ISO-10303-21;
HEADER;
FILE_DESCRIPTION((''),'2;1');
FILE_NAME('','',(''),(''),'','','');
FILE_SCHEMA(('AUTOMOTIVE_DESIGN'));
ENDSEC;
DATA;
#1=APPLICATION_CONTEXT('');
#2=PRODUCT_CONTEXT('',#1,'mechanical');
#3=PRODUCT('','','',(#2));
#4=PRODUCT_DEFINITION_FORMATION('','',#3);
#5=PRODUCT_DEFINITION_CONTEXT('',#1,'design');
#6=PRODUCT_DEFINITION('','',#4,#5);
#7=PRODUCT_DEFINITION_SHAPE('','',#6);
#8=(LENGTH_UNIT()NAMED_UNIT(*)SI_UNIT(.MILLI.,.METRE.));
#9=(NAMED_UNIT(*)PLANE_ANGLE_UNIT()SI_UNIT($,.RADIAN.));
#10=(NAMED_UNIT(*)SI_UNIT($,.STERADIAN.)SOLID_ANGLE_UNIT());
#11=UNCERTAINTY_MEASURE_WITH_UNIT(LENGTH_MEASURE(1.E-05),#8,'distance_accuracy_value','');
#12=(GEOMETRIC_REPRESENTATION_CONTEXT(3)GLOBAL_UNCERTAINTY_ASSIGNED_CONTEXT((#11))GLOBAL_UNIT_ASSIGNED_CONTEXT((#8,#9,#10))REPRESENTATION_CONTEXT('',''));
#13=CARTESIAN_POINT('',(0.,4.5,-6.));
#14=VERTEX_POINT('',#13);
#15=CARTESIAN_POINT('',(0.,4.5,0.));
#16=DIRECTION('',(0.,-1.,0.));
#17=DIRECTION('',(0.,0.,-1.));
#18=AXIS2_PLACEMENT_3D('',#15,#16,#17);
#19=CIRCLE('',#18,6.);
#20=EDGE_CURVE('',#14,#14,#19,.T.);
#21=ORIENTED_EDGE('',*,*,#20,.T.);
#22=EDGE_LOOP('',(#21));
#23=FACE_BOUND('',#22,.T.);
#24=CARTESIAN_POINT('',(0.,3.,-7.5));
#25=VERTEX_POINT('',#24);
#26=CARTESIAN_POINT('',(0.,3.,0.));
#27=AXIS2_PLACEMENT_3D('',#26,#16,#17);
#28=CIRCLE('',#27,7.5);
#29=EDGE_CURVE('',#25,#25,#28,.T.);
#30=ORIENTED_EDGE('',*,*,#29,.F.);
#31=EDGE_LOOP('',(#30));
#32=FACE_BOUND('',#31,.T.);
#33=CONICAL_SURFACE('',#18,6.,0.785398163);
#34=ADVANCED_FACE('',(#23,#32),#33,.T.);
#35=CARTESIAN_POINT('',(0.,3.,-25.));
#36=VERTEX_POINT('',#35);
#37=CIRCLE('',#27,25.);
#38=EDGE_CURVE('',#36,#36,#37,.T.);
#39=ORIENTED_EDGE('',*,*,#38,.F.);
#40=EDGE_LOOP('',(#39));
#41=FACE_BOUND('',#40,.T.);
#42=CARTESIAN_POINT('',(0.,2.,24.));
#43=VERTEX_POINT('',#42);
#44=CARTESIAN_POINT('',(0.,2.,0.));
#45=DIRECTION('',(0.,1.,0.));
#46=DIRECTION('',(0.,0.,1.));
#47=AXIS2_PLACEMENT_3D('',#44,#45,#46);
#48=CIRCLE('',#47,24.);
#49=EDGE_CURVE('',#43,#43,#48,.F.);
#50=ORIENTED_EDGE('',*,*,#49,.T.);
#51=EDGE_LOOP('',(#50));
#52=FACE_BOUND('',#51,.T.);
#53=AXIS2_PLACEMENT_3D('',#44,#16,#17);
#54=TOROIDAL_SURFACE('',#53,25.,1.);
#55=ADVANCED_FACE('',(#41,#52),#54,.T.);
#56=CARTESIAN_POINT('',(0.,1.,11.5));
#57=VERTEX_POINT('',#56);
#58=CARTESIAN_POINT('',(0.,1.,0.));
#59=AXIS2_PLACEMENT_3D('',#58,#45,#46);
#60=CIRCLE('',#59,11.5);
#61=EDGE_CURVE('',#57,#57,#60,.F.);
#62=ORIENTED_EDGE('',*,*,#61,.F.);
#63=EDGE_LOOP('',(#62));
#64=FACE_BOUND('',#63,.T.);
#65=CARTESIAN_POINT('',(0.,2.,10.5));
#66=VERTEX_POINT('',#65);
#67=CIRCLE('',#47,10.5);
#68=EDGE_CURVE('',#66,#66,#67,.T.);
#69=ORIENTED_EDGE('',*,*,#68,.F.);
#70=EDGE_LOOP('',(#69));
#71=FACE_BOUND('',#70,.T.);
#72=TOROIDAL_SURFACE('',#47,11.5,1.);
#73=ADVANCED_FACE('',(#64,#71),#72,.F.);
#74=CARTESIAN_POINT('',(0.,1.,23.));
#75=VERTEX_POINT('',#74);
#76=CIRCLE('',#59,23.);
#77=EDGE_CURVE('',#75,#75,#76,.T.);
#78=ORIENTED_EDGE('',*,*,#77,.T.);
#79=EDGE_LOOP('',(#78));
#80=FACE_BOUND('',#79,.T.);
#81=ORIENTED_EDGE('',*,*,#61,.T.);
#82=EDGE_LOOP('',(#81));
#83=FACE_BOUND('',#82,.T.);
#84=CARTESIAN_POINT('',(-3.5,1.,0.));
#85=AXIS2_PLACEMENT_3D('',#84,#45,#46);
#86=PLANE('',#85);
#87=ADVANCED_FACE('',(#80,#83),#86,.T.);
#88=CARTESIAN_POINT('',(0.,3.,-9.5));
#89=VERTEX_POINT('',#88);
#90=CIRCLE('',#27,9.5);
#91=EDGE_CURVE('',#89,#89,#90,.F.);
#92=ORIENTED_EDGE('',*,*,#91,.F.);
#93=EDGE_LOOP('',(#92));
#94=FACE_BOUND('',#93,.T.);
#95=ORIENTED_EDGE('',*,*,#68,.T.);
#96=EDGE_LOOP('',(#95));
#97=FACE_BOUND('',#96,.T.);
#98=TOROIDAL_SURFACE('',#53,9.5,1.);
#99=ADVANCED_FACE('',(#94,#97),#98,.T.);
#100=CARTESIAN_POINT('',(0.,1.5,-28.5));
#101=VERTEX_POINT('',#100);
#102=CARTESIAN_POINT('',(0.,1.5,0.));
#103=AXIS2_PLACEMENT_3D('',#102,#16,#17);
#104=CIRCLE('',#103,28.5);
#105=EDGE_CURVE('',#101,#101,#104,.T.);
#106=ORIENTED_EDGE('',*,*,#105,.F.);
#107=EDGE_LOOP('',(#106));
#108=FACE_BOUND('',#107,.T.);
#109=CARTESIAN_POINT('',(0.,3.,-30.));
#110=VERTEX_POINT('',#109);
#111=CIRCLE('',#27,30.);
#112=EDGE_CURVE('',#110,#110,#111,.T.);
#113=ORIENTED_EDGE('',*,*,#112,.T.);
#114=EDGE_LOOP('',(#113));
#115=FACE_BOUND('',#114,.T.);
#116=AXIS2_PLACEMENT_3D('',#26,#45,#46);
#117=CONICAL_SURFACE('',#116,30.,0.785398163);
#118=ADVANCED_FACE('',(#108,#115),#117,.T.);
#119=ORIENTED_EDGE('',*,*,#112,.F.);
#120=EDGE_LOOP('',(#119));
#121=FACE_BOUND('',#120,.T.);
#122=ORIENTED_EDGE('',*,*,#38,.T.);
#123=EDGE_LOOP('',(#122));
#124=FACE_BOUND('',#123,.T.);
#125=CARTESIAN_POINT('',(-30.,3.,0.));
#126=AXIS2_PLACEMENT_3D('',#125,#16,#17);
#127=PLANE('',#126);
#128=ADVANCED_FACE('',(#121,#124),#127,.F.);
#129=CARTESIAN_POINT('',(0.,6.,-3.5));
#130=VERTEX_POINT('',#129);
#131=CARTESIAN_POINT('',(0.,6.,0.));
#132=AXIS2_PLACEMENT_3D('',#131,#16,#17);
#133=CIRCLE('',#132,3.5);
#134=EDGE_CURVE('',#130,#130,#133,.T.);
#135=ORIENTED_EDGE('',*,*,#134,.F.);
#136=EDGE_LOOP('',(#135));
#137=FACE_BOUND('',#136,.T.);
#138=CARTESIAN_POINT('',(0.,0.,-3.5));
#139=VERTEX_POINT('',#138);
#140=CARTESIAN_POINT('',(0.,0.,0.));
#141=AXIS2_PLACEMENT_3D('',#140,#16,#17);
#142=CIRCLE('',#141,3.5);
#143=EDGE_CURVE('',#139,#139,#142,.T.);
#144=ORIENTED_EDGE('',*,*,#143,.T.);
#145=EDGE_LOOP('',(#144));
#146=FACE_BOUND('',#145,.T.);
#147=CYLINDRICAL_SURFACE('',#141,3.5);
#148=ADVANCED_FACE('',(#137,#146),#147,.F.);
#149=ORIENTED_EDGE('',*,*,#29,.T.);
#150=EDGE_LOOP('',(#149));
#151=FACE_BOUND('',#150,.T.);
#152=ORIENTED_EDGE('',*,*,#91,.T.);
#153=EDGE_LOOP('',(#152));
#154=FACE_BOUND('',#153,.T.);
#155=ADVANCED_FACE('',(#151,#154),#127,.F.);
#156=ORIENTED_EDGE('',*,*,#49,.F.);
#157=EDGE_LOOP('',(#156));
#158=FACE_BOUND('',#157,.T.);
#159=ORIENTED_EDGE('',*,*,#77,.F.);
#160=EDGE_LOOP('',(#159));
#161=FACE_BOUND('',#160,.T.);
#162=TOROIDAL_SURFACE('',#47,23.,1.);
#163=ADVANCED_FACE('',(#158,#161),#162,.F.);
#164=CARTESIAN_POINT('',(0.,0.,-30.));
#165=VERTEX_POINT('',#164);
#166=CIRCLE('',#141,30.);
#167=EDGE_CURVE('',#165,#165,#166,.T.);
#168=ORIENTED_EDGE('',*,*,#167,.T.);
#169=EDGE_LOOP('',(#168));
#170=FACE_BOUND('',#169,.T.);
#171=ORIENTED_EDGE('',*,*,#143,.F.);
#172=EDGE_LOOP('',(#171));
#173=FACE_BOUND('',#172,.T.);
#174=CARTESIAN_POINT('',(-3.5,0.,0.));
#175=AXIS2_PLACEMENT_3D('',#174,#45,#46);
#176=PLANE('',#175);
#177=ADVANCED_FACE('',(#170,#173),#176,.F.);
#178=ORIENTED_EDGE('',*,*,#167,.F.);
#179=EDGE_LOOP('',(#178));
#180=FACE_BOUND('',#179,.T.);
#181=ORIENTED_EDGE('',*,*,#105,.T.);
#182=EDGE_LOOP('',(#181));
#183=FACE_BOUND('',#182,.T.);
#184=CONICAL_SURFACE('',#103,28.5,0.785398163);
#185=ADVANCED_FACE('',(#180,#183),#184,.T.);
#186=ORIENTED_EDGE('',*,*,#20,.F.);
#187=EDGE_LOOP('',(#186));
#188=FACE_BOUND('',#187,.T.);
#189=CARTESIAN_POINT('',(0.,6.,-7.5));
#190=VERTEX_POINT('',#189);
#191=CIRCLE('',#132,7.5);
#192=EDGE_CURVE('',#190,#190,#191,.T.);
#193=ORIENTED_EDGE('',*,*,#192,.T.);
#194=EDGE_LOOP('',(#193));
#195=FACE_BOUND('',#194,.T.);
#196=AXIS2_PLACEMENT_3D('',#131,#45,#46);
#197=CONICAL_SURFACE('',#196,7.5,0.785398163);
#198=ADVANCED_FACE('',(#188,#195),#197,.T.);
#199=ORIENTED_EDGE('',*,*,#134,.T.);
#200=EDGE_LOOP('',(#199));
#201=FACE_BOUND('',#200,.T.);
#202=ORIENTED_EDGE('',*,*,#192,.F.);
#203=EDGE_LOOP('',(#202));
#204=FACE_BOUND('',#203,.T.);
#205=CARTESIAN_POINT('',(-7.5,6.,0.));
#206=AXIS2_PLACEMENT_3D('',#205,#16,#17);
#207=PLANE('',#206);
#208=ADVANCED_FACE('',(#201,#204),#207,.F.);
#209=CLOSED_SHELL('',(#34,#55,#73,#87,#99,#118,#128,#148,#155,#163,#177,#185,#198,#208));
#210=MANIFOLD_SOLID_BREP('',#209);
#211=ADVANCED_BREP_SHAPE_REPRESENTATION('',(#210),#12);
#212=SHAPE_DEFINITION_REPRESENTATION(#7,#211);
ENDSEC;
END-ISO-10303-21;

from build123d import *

# Parameters (mm, degrees)
SKETCH2_R          = 24
SKETCH2_R_2        = 10.5
CUT_EXTRUDE1_DEPTH = 2
FILLET1_R          = 1


with BuildPart() as part:
    # Sketch1 → Revolve1 (revolve)
    with BuildSketch(Plane.XY, mode=Mode.PRIVATE) as revolve1_sk:
        Polygon((-3.5, 6), (-3.5, 0), (-30, 0), (-28.5, 1.5), (-30, 3), (-7.5, 3), (-6, 4.5), (-7.5, 6), align=None)
    revolve(revolve1_sk.sketch.rotate(Axis((0, 0, 0), (0, 1, 0)), 270), axis=Axis((0, 0, 0), (0, 1, 0)))

    # Sketch2 → Cut-Extrude1 (cut)
    with BuildSketch(Plane(origin=(0, 3, 0), x_dir=(1, 0, 0), z_dir=(0, 1, 0))):
        with Locations(Location((0, 0, 0), (0, 0, 270))):
            Circle(SKETCH2_R)
        with Locations(Location((0, 0, 0), (0, 0, 270))):
            Circle(SKETCH2_R_2, mode=Mode.SUBTRACT)
    extrude(amount=-CUT_EXTRUDE1_DEPTH, mode=Mode.SUBTRACT)

    # Fillet1
    fillet1_edges = [part.edges().sort_by_distance(p)[0] for p in [
        (0, 1, -10.5),
        (0, 1, -24),
    ]]
    fillet(fillet1_edges, radius=FILLET1_R)
    fillet1_2_edges = [part.edges().sort_by_distance(p)[0] for p in [
        (0, 3, -24),
        (0, 3, -10.5),
    ]]
    fillet(fillet1_2_edges, radius=FILLET1_R - 0.0001)  # a hair under: the kernel refuses the full size


solid = part.part
